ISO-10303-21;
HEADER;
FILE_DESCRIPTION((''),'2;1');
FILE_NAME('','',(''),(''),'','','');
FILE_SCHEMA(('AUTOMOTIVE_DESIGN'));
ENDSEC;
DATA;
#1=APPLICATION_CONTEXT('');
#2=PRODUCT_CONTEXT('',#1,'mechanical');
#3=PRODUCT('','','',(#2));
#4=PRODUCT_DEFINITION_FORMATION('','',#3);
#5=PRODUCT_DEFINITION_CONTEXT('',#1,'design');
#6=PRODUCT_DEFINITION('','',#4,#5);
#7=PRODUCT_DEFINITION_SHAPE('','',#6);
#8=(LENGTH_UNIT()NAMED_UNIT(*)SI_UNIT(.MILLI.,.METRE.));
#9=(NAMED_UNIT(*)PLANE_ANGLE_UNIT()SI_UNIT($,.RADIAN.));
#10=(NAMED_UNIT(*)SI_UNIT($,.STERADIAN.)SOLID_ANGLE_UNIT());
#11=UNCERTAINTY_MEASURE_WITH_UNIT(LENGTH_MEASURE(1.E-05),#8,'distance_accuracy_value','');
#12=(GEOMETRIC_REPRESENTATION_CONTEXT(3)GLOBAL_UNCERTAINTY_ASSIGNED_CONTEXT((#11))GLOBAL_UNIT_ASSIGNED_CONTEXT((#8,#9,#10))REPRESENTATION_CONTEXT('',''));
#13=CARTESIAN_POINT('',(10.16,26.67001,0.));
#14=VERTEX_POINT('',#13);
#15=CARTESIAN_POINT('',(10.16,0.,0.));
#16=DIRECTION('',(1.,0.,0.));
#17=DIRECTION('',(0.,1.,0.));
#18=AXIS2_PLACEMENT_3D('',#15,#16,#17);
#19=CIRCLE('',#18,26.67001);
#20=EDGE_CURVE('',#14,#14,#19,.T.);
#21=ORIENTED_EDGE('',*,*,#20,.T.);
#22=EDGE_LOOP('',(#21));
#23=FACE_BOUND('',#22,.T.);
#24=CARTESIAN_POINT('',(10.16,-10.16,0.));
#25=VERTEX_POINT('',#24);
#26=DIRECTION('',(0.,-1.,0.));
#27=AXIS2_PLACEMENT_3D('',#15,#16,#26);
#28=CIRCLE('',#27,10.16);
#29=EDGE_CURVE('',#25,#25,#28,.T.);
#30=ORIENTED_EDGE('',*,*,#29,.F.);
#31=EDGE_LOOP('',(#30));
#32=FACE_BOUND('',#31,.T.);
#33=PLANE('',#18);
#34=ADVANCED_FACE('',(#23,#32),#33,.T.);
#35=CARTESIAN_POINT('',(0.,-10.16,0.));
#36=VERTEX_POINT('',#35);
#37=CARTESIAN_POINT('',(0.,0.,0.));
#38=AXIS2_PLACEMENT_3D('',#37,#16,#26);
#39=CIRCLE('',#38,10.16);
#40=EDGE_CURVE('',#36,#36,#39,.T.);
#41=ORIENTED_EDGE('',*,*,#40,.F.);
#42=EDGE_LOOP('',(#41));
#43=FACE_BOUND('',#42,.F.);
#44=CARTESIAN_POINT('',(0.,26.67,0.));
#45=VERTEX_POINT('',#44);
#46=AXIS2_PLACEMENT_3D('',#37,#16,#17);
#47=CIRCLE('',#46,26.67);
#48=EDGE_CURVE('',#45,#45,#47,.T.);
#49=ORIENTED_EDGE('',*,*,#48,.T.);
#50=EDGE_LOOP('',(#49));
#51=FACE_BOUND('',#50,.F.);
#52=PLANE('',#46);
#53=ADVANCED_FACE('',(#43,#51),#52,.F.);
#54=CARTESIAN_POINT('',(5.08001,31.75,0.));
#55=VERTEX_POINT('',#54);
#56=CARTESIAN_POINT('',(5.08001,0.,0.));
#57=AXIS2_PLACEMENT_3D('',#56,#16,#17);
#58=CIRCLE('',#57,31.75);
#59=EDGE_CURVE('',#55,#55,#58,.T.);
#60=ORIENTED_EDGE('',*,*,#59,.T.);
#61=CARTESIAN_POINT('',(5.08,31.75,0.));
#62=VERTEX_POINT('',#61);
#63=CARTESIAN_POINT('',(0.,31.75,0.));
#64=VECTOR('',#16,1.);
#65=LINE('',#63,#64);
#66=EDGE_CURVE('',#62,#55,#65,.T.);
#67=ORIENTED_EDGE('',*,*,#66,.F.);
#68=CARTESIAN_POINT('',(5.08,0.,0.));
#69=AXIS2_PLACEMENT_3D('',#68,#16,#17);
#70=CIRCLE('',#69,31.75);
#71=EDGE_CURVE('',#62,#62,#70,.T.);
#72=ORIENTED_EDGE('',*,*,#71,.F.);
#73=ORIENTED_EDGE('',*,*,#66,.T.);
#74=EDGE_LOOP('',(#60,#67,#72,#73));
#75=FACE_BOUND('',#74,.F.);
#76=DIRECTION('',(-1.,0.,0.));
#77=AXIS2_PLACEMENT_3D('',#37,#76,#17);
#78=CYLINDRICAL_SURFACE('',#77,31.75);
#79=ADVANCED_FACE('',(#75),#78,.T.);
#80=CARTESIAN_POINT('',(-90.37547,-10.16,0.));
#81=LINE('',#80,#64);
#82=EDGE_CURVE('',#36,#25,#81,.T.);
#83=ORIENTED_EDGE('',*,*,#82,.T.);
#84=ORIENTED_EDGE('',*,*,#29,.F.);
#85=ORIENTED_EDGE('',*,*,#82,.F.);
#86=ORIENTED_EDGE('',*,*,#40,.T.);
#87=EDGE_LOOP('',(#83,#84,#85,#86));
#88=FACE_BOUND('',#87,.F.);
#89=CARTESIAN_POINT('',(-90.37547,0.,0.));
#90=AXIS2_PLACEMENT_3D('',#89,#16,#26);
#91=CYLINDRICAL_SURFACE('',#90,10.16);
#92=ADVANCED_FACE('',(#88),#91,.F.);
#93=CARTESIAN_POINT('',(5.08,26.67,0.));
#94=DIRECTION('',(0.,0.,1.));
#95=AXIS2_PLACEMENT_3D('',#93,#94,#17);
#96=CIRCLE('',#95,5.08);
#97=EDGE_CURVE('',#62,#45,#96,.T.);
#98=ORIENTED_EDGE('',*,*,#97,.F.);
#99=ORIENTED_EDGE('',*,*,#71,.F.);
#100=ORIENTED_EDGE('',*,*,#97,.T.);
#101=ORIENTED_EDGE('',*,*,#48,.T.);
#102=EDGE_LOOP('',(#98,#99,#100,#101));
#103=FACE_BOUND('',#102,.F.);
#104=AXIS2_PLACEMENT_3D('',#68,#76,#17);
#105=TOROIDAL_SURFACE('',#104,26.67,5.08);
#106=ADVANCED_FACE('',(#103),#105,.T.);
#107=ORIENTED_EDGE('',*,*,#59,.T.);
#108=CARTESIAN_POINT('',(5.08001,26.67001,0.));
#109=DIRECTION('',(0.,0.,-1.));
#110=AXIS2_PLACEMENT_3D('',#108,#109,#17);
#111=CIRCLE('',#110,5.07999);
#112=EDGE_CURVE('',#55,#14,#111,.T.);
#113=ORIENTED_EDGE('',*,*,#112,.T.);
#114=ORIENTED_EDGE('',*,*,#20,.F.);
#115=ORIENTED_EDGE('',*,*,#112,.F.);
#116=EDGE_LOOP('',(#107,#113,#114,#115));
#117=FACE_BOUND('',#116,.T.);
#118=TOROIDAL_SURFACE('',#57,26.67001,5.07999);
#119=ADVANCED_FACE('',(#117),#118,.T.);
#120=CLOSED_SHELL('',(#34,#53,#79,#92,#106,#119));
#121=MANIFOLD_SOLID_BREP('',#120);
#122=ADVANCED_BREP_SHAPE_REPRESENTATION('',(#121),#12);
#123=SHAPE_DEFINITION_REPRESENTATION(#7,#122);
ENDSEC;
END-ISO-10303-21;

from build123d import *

# Parameters (mm, degrees)
F0_R     = 31.75
F2_DEPTH = 10.16
F3_D     = 20.32
F4_R     = 5.08
F5_R     = 5.07999


# Not quite as in the source:
# - a fillet or chamfer is up to 0.001 mm smaller than in the source, because OpenCascade refuses the exact size


with BuildPart() as f2:
    # F0 (on Right) → F2 (new body)
    with BuildSketch(Plane.YZ):
        Circle(F0_R)
    extrude(amount=F2_DEPTH)

    # F3 (through all)
    with Locations(Plane(origin=(0, 0, 0), x_dir=(0, 1, 0), z_dir=(-1, 0, 0))):
        with Locations((0, 0)):
            Hole(F3_D / 2)

    # F4
    f4_edges = [f2.edges().sort_by_distance(p)[0] for p in [
        (0, -31.75, 0),
    ]]
    fillet(f4_edges, radius=F4_R)

    # F5 (radius 5.08 in the source; OpenCascade refuses exactly that, so slightly less here)
    f5_edges = [f2.edges().sort_by_distance(p)[0] for p in [
        (10.16, -31.75, 0),
    ]]
    fillet(f5_edges, radius=F5_R)


solid = f2.part
